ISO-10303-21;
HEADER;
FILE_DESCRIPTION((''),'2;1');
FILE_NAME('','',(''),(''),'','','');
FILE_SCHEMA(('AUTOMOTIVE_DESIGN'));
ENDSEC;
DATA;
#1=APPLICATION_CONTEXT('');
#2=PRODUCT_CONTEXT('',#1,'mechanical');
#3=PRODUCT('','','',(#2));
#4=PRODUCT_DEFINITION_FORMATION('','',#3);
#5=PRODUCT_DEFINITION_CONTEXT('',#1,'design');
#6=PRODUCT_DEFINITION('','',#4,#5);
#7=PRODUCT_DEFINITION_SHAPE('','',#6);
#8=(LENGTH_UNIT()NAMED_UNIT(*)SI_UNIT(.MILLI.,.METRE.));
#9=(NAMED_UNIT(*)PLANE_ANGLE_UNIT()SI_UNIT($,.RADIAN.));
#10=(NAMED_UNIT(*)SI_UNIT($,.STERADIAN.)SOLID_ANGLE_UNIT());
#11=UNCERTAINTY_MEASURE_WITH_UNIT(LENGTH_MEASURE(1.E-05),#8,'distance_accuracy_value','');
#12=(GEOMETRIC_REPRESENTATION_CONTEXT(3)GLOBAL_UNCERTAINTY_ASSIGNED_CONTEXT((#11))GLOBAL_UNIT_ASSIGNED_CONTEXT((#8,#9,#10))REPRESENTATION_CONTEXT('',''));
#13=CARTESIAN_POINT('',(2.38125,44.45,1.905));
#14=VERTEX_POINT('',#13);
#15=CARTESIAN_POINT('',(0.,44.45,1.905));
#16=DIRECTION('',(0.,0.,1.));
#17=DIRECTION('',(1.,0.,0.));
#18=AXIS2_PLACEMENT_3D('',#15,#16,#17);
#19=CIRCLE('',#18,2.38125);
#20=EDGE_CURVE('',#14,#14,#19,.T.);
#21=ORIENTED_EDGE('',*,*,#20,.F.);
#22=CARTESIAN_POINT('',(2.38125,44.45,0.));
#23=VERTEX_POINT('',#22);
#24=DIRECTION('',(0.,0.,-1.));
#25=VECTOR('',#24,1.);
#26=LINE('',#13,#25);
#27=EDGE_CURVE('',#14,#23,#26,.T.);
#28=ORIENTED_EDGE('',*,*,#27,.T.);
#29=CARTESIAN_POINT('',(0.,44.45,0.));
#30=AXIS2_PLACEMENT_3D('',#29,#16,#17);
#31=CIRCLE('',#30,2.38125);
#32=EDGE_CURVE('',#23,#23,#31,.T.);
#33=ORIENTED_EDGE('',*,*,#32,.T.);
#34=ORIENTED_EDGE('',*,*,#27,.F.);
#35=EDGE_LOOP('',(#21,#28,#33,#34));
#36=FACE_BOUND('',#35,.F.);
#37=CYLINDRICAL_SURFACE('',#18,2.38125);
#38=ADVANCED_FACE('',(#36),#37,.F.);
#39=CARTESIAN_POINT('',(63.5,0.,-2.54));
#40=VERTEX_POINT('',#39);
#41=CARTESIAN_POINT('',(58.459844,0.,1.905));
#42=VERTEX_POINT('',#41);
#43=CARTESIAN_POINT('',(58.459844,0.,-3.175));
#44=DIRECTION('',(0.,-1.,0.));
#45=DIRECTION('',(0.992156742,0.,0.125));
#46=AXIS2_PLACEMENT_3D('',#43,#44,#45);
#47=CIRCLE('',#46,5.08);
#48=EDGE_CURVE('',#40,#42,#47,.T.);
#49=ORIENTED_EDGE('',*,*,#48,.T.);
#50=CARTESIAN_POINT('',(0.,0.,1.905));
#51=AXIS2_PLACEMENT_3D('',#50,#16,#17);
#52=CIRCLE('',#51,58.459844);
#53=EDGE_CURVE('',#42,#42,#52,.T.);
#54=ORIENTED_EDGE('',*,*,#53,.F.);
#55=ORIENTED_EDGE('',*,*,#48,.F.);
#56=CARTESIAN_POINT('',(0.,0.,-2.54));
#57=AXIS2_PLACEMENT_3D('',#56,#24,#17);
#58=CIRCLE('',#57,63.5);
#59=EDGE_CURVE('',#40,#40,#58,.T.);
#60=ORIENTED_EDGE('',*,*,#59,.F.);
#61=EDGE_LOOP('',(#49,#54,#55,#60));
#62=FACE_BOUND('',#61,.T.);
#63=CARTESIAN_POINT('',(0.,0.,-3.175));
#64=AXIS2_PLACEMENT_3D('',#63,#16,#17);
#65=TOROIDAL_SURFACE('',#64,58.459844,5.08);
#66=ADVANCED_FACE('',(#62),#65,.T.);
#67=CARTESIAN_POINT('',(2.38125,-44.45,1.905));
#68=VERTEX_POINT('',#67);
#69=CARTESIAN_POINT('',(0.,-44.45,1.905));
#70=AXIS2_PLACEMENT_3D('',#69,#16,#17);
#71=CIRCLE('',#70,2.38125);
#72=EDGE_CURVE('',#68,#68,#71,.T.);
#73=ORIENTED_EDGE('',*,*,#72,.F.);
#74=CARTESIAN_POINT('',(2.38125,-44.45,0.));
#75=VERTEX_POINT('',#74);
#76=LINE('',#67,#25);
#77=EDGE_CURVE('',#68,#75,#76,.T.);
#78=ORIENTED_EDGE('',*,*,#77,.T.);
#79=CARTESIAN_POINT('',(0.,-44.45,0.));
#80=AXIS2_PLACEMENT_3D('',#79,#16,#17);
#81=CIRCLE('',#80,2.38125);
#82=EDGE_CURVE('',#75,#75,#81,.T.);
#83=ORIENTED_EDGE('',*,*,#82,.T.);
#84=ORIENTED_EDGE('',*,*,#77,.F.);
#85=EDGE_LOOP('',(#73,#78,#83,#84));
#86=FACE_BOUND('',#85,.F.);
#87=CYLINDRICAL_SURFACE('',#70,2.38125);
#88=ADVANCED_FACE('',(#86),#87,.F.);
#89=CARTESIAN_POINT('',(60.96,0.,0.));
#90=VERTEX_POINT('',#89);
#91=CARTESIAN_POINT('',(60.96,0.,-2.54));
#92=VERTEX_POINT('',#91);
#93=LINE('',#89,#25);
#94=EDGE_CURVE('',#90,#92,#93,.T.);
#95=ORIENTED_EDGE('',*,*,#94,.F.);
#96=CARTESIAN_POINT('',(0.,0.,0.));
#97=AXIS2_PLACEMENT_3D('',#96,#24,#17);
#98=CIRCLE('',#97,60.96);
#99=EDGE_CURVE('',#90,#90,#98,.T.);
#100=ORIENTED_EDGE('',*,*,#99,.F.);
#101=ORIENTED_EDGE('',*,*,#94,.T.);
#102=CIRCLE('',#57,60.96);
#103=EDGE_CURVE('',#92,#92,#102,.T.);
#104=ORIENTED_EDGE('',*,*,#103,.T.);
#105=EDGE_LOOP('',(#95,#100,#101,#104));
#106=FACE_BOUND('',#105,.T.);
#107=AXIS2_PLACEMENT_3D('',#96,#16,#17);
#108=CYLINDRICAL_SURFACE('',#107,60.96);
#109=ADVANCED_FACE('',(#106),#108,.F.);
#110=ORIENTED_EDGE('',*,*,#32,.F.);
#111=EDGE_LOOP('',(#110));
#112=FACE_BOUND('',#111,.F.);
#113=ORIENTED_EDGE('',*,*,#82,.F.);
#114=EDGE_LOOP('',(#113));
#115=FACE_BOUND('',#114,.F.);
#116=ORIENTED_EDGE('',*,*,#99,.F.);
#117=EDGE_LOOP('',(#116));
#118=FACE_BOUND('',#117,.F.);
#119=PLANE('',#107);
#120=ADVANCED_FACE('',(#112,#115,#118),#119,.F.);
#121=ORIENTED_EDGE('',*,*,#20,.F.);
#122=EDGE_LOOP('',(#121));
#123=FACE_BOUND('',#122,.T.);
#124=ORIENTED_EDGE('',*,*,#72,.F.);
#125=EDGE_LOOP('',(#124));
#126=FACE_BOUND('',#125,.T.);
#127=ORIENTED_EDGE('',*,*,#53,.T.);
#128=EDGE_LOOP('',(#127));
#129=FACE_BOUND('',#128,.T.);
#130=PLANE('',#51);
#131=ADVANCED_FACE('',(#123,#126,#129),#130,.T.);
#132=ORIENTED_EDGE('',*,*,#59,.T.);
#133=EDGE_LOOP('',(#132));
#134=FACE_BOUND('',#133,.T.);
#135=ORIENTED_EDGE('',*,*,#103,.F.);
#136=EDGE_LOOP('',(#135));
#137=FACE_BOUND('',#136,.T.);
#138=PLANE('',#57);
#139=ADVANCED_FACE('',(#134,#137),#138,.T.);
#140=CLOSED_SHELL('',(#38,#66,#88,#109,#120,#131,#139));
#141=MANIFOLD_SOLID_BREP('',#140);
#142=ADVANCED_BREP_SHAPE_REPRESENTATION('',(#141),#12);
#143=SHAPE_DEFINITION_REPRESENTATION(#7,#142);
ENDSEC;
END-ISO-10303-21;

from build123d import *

# Parameters (mm, degrees)
F0_R     = 63.5
F1_DEPTH = 1.905
F2_R     = 2.38125
F3_DEPTH = 1.906
F4_R     = 63.5
F4_R_2   = 60.96
F5_DEPTH = 2.54


# Not quite as in the source:
# - a fillet or chamfer that OpenCascade refuses, or shapes differently, is made with other operations: its cross-section is extruded or revolved along the edge and cut away or added


with BuildPart() as f1:
    # F0 (on Top) → F1 (new body)
    with BuildSketch(Plane.XY):
        Circle(F0_R)
    extrude(amount=F1_DEPTH)

    # F2 (on face) → F3 (cut, through all)
    with BuildSketch(Plane.XY.offset(1.905)):
        with Locations((0, 44.45)):
            Circle(F2_R)
        with Locations((0, -44.45)):
            Circle(F2_R)
    extrude(amount=-F3_DEPTH, mode=Mode.SUBTRACT)

    # F4 (on face) → F5 (join)
    with BuildSketch(Plane(origin=(0, 0, 0), x_dir=(1, 0, 0), z_dir=(0, 0, -1))):
        Circle(F4_R)
        Circle(F4_R_2, mode=Mode.SUBTRACT)
    extrude(amount=F5_DEPTH)

    # F6: fillet of radius 5.08 on 1 edges, made by hand

    # F6_s1 → F6_t2 (revolve, cut)
    with BuildSketch(Plane.XZ):
        with BuildLine():
            ThreePointArc((63.5, -2.54), (61.8199479175, 0.635), (58.4598437524, 1.905))
            Line((58.4598437524, 1.905), (63.5, 1.905))
            Line((63.5, 1.905), (63.5, -2.54))
        make_face()
    revolve(axis=Axis((0, 0, 1.905), (0, 0, 1)), mode=Mode.SUBTRACT)


solid = f1.part
